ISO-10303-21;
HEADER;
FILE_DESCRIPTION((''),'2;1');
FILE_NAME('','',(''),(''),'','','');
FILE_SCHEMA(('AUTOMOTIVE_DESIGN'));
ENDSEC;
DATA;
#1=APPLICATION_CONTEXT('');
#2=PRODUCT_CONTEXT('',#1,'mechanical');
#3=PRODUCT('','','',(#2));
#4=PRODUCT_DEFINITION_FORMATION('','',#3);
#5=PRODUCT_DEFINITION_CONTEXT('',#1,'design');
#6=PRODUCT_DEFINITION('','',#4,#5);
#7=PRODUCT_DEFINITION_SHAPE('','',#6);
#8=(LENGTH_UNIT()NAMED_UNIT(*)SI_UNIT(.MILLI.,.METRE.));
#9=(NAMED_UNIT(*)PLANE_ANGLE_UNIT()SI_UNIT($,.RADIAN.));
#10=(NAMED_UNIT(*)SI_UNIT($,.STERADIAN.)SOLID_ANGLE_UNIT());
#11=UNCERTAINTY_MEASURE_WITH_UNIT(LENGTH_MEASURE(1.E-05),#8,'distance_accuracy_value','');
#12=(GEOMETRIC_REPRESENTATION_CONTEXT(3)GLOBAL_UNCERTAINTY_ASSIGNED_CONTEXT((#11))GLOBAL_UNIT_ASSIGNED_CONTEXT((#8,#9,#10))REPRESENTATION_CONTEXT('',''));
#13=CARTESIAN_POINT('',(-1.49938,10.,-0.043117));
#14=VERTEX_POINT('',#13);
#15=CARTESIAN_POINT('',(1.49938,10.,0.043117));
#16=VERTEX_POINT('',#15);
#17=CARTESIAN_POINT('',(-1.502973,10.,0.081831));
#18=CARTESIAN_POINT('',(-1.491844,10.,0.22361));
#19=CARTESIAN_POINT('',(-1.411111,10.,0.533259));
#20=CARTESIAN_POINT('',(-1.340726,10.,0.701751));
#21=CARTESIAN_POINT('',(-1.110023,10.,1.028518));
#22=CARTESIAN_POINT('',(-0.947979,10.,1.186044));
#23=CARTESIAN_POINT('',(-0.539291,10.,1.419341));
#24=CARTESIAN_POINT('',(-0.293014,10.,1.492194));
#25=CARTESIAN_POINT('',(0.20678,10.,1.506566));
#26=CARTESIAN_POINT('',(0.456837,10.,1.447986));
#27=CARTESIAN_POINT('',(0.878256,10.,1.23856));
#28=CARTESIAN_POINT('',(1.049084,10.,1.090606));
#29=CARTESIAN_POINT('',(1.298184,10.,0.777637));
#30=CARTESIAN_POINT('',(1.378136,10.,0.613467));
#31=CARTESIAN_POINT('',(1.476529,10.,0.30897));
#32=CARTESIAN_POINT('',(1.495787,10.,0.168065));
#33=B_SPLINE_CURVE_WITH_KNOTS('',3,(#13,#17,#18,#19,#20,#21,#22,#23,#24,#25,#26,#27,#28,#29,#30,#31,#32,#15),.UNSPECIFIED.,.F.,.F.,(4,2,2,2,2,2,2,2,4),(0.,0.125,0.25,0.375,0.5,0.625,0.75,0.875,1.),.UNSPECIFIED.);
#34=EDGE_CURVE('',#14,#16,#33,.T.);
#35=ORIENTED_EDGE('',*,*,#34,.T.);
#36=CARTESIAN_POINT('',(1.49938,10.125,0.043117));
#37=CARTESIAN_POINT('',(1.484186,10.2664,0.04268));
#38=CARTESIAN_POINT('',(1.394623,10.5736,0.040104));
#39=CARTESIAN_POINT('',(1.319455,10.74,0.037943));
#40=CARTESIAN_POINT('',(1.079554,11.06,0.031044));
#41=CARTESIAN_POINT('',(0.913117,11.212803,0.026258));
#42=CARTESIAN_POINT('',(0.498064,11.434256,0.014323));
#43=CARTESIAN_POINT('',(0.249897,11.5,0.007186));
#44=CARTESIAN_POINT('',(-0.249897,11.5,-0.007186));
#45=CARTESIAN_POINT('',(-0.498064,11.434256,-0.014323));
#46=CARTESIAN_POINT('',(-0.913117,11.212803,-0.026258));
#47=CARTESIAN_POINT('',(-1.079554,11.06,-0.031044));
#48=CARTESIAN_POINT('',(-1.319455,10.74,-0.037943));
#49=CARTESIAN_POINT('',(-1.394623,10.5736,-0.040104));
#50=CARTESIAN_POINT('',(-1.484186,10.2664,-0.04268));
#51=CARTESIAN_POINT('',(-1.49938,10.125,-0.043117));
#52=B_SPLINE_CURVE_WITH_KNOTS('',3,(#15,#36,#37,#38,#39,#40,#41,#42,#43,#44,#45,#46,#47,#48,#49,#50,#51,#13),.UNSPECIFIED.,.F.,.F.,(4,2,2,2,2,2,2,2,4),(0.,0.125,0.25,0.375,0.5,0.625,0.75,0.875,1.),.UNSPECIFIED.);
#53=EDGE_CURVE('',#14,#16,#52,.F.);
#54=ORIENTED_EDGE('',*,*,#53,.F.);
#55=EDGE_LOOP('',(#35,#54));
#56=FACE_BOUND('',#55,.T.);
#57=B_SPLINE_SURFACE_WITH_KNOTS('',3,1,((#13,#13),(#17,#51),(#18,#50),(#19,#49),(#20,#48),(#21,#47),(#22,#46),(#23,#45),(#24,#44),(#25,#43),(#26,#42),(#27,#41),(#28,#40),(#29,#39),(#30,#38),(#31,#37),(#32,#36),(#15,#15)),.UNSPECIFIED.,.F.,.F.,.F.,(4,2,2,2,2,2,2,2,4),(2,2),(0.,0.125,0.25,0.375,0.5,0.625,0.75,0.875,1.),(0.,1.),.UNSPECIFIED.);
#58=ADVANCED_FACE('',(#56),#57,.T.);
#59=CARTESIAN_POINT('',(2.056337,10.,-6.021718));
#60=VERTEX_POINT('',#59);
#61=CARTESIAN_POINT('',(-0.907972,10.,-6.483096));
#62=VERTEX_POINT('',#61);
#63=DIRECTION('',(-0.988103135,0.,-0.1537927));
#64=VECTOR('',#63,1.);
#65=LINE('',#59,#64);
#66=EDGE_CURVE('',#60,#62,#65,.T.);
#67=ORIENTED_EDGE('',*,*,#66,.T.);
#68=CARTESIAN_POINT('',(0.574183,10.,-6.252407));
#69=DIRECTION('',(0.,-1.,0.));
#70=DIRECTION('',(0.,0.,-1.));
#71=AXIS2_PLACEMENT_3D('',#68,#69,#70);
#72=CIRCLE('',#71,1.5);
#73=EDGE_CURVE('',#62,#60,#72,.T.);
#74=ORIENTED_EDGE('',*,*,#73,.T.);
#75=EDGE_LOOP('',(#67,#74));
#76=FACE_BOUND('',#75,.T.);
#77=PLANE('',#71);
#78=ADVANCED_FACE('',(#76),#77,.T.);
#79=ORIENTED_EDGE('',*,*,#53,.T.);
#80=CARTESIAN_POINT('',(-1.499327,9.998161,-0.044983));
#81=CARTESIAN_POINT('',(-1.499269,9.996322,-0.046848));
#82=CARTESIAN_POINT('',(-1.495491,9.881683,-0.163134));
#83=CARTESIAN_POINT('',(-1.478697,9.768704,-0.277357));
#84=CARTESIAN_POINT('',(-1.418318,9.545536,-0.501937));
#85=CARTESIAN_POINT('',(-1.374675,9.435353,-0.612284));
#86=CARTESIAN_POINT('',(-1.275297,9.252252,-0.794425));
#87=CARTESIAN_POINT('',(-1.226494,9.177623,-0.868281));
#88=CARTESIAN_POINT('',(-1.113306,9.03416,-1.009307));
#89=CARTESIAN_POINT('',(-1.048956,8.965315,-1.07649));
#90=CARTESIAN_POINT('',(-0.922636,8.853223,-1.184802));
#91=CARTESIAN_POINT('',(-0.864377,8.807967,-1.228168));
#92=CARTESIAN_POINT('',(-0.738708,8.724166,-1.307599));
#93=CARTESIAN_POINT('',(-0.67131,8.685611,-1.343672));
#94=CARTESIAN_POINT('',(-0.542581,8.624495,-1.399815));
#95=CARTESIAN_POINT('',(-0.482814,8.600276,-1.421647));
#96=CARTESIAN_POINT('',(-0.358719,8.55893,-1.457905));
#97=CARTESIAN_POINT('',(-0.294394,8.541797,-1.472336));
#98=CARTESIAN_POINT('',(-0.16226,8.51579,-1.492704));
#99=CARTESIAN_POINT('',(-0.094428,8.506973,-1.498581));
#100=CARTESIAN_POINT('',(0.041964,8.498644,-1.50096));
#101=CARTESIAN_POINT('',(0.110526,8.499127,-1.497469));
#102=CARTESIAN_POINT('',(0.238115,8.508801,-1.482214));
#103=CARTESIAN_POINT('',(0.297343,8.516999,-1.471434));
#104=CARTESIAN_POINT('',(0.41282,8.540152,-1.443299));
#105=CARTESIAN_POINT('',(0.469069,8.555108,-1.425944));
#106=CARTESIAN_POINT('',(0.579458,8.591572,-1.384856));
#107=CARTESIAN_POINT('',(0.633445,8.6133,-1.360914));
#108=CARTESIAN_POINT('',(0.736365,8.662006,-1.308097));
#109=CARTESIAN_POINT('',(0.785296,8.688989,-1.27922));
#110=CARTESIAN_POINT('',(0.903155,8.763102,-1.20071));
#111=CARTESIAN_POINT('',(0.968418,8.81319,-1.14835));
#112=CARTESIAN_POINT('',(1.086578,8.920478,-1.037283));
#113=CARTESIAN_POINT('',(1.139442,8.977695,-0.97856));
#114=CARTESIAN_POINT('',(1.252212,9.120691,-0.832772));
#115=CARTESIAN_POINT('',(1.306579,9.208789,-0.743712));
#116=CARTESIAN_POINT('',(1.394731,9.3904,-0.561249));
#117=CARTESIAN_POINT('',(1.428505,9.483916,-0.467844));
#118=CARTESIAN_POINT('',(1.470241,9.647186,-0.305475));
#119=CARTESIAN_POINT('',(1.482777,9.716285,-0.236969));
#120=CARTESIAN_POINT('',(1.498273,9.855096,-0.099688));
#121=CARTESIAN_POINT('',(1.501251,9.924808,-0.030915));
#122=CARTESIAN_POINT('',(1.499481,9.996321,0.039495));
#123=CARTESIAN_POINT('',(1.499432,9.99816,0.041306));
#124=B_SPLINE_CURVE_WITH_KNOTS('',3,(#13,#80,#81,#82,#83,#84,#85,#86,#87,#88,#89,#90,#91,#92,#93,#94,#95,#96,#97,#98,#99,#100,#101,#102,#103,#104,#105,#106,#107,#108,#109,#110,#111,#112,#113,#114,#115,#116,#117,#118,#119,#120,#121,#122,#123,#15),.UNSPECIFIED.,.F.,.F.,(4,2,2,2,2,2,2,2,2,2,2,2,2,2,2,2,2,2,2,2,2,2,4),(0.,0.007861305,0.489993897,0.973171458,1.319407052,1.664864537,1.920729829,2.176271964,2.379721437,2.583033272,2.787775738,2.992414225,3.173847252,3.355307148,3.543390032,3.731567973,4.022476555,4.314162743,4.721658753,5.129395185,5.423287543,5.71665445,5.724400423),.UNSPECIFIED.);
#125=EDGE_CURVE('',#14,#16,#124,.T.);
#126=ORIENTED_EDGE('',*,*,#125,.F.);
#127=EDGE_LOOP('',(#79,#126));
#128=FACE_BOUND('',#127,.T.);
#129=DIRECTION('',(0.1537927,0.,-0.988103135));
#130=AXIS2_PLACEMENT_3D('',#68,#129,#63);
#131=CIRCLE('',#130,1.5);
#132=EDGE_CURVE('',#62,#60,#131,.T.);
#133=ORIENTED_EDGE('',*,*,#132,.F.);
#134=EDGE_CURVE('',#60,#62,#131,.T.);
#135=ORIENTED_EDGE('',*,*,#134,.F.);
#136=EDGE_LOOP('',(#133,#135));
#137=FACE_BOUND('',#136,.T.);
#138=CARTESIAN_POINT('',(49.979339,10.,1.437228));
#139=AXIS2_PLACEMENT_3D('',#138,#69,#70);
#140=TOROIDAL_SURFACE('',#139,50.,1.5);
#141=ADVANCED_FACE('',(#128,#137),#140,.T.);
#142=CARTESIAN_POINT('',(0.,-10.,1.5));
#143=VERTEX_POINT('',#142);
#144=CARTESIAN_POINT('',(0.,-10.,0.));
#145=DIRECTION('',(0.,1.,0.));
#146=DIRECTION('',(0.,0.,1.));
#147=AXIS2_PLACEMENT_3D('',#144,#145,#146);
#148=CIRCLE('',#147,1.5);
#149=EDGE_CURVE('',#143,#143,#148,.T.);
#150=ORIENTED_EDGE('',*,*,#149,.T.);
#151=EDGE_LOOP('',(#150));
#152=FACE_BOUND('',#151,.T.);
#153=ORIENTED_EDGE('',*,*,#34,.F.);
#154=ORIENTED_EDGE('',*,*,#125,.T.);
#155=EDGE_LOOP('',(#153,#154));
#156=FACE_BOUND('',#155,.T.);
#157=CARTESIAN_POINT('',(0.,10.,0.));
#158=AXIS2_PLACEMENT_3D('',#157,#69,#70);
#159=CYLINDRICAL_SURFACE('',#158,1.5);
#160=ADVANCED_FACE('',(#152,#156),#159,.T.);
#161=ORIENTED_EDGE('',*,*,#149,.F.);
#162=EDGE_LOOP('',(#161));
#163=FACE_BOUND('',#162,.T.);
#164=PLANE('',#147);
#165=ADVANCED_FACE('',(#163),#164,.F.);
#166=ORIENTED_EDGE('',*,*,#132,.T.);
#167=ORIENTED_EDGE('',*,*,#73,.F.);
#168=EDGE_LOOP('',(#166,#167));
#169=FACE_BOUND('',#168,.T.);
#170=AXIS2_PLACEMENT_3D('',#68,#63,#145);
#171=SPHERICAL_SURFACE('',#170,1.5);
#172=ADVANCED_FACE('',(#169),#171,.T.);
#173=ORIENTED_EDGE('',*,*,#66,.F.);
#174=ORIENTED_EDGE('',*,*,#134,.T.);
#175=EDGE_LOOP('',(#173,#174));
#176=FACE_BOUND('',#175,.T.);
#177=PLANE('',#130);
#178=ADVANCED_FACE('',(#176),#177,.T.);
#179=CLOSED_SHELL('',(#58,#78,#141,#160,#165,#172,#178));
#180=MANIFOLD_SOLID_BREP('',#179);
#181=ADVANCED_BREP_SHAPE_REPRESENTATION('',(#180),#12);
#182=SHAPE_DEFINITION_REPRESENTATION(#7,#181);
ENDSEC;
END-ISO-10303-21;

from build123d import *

# Parameters (mm, degrees)
SKETCH1_R           = 1.5
BOSS_EXTRUDE1_DEPTH = 10
SWEEP1_PROFILE_R    = 1.5
REVOLVE1_ANGLE      = 90


with BuildPart() as part:
    # Sketch1 → Boss-Extrude1 (new, symmetric)
    with BuildSketch(Plane(origin=(0, 0, 0), x_dir=(1, 0, 0), z_dir=(0, 1, 0))):
        with Locations(Location((0, 0, 0), (0, 0, 270))):
            Circle(SKETCH1_R)
    extrude(amount=BOSS_EXTRUDE1_DEPTH, both=True)

    # Sweep1: sweep along a path in Sketch2
    with BuildLine(Plane(origin=(0, 10, 0), x_dir=(1, 0, 0), z_dir=(0, 1, 0))) as sweep1_path:
        ThreePointArc((0, 0), (0.188851733, 3.135225091), (0.574182733, 6.252406729))
    # Sweep1 profile (on start of the path) → Sweep1 (sweep)
    with BuildSketch(Plane(origin=(0, 10, 0), x_dir=(-0.9995867895951688, 0, -0.028744565865985165), z_dir=(0.028744565865985165, 0, -0.9995867895951688))):
        Circle(SWEEP1_PROFILE_R)
    sweep(path=sweep1_path.line)

    # Loft1: read off the stored shape, not the designer's step
    # Loft1: loft between two sections, ruled curve by curve
    loft1_from = [
        Edge.make_bspline([(-1.499380184, 10, -0.043116849), (-1.502973255, 10, 0.0818315), (-1.491844018, 10, 0.223609989), (-1.411111372, 10, 0.533258564), (-1.340725541, 10, 0.701751397), (-1.110022973, 10, 1.028517866), (-0.947978833, 10, 1.186043614), (-0.539291074, 10, 1.419340854), (-0.293013546, 10, 1.492194043), (0.206779849, 10, 1.506566326), (0.456836938, 10, 1.447985958), (0.878255855, 10, 1.238559637), (1.049084493, 10, 1.090606128), (1.298183584, 10, 0.777637051), (1.378135606, 10, 0.613467401), (1.476528913, 10, 0.308969852), (1.495787114, 10, 0.168065197), (1.499380184, 10, 0.043116849)], [0, 0, 0, 0, 0.125, 0.125, 0.25, 0.25, 0.375, 0.375, 0.5, 0.5, 0.625, 0.625, 0.75, 0.75, 0.875, 0.875, 1, 1, 1, 1], 3),
        Edge.make_line((1.499380184, 10, 0.043116849), (-1.499380184, 10, -0.043116849)),
    ]
    loft1_to = [
        Edge.make_bspline([(-1.499380184, 10, -0.043116849), (-1.499380184, 10.125, -0.043116849), (-1.484186465, 10.2664, -0.042679931), (-1.394623489, 10.5736, -0.040104418), (-1.319454562, 10.74, -0.037942827), (-1.079553733, 11.06, -0.031044131), (-0.913117344, 11.212802768, -0.026258012), (-0.498064006, 11.434256055, -0.014322552), (-0.249896697, 11.5, -0.007186141), (0.249896697, 11.5, 0.007186141), (0.498064006, 11.434256055, 0.014322552), (0.913117344, 11.212802768, 0.026258012), (1.079553733, 11.06, 0.031044131), (1.319454562, 10.74, 0.037942827), (1.394623489, 10.5736, 0.040104418), (1.484186465, 10.2664, 0.042679931), (1.499380184, 10.125, 0.043116849), (1.499380184, 10, 0.043116849)], [0, 0, 0, 0, 0.125, 0.125, 0.25, 0.25, 0.375, 0.375, 0.5, 0.5, 0.625, 0.625, 0.75, 0.75, 0.875, 0.875, 1, 1, 1, 1], 3),
        Edge.make_line((1.499380184, 10, 0.043116849), (-1.499380184, 10, -0.043116849)),
    ]
    loft1 = Solid(Shell([*[Face.make_surface_from_curves(loft1_from[k], loft1_to[k]) for k in range(2)], Face(Wire(loft1_from)), Face(Wire(loft1_to))]))
    add(loft1)

    # Sketch9 → Revolve1 (revolve)
    with BuildSketch(Plane(origin=(0, 10, 0), x_dir=(-1, 0, 0), z_dir=(0, -1, 0))):
        with BuildLine():
            Line((-2.056337435, 6.021717679), (0.90797197, 6.48309578))
            ThreePointArc((0.90797197, 6.48309578), (-0.804871783, 7.734561432), (-2.056337435, 6.021717679))
        make_face()
    revolve(axis=Axis((2.056337435, 10, -6.021717679), (0.9881031349451361, 0, 0.15379270044964483)), revolution_arc=REVOLVE1_ANGLE)


solid = part.part
